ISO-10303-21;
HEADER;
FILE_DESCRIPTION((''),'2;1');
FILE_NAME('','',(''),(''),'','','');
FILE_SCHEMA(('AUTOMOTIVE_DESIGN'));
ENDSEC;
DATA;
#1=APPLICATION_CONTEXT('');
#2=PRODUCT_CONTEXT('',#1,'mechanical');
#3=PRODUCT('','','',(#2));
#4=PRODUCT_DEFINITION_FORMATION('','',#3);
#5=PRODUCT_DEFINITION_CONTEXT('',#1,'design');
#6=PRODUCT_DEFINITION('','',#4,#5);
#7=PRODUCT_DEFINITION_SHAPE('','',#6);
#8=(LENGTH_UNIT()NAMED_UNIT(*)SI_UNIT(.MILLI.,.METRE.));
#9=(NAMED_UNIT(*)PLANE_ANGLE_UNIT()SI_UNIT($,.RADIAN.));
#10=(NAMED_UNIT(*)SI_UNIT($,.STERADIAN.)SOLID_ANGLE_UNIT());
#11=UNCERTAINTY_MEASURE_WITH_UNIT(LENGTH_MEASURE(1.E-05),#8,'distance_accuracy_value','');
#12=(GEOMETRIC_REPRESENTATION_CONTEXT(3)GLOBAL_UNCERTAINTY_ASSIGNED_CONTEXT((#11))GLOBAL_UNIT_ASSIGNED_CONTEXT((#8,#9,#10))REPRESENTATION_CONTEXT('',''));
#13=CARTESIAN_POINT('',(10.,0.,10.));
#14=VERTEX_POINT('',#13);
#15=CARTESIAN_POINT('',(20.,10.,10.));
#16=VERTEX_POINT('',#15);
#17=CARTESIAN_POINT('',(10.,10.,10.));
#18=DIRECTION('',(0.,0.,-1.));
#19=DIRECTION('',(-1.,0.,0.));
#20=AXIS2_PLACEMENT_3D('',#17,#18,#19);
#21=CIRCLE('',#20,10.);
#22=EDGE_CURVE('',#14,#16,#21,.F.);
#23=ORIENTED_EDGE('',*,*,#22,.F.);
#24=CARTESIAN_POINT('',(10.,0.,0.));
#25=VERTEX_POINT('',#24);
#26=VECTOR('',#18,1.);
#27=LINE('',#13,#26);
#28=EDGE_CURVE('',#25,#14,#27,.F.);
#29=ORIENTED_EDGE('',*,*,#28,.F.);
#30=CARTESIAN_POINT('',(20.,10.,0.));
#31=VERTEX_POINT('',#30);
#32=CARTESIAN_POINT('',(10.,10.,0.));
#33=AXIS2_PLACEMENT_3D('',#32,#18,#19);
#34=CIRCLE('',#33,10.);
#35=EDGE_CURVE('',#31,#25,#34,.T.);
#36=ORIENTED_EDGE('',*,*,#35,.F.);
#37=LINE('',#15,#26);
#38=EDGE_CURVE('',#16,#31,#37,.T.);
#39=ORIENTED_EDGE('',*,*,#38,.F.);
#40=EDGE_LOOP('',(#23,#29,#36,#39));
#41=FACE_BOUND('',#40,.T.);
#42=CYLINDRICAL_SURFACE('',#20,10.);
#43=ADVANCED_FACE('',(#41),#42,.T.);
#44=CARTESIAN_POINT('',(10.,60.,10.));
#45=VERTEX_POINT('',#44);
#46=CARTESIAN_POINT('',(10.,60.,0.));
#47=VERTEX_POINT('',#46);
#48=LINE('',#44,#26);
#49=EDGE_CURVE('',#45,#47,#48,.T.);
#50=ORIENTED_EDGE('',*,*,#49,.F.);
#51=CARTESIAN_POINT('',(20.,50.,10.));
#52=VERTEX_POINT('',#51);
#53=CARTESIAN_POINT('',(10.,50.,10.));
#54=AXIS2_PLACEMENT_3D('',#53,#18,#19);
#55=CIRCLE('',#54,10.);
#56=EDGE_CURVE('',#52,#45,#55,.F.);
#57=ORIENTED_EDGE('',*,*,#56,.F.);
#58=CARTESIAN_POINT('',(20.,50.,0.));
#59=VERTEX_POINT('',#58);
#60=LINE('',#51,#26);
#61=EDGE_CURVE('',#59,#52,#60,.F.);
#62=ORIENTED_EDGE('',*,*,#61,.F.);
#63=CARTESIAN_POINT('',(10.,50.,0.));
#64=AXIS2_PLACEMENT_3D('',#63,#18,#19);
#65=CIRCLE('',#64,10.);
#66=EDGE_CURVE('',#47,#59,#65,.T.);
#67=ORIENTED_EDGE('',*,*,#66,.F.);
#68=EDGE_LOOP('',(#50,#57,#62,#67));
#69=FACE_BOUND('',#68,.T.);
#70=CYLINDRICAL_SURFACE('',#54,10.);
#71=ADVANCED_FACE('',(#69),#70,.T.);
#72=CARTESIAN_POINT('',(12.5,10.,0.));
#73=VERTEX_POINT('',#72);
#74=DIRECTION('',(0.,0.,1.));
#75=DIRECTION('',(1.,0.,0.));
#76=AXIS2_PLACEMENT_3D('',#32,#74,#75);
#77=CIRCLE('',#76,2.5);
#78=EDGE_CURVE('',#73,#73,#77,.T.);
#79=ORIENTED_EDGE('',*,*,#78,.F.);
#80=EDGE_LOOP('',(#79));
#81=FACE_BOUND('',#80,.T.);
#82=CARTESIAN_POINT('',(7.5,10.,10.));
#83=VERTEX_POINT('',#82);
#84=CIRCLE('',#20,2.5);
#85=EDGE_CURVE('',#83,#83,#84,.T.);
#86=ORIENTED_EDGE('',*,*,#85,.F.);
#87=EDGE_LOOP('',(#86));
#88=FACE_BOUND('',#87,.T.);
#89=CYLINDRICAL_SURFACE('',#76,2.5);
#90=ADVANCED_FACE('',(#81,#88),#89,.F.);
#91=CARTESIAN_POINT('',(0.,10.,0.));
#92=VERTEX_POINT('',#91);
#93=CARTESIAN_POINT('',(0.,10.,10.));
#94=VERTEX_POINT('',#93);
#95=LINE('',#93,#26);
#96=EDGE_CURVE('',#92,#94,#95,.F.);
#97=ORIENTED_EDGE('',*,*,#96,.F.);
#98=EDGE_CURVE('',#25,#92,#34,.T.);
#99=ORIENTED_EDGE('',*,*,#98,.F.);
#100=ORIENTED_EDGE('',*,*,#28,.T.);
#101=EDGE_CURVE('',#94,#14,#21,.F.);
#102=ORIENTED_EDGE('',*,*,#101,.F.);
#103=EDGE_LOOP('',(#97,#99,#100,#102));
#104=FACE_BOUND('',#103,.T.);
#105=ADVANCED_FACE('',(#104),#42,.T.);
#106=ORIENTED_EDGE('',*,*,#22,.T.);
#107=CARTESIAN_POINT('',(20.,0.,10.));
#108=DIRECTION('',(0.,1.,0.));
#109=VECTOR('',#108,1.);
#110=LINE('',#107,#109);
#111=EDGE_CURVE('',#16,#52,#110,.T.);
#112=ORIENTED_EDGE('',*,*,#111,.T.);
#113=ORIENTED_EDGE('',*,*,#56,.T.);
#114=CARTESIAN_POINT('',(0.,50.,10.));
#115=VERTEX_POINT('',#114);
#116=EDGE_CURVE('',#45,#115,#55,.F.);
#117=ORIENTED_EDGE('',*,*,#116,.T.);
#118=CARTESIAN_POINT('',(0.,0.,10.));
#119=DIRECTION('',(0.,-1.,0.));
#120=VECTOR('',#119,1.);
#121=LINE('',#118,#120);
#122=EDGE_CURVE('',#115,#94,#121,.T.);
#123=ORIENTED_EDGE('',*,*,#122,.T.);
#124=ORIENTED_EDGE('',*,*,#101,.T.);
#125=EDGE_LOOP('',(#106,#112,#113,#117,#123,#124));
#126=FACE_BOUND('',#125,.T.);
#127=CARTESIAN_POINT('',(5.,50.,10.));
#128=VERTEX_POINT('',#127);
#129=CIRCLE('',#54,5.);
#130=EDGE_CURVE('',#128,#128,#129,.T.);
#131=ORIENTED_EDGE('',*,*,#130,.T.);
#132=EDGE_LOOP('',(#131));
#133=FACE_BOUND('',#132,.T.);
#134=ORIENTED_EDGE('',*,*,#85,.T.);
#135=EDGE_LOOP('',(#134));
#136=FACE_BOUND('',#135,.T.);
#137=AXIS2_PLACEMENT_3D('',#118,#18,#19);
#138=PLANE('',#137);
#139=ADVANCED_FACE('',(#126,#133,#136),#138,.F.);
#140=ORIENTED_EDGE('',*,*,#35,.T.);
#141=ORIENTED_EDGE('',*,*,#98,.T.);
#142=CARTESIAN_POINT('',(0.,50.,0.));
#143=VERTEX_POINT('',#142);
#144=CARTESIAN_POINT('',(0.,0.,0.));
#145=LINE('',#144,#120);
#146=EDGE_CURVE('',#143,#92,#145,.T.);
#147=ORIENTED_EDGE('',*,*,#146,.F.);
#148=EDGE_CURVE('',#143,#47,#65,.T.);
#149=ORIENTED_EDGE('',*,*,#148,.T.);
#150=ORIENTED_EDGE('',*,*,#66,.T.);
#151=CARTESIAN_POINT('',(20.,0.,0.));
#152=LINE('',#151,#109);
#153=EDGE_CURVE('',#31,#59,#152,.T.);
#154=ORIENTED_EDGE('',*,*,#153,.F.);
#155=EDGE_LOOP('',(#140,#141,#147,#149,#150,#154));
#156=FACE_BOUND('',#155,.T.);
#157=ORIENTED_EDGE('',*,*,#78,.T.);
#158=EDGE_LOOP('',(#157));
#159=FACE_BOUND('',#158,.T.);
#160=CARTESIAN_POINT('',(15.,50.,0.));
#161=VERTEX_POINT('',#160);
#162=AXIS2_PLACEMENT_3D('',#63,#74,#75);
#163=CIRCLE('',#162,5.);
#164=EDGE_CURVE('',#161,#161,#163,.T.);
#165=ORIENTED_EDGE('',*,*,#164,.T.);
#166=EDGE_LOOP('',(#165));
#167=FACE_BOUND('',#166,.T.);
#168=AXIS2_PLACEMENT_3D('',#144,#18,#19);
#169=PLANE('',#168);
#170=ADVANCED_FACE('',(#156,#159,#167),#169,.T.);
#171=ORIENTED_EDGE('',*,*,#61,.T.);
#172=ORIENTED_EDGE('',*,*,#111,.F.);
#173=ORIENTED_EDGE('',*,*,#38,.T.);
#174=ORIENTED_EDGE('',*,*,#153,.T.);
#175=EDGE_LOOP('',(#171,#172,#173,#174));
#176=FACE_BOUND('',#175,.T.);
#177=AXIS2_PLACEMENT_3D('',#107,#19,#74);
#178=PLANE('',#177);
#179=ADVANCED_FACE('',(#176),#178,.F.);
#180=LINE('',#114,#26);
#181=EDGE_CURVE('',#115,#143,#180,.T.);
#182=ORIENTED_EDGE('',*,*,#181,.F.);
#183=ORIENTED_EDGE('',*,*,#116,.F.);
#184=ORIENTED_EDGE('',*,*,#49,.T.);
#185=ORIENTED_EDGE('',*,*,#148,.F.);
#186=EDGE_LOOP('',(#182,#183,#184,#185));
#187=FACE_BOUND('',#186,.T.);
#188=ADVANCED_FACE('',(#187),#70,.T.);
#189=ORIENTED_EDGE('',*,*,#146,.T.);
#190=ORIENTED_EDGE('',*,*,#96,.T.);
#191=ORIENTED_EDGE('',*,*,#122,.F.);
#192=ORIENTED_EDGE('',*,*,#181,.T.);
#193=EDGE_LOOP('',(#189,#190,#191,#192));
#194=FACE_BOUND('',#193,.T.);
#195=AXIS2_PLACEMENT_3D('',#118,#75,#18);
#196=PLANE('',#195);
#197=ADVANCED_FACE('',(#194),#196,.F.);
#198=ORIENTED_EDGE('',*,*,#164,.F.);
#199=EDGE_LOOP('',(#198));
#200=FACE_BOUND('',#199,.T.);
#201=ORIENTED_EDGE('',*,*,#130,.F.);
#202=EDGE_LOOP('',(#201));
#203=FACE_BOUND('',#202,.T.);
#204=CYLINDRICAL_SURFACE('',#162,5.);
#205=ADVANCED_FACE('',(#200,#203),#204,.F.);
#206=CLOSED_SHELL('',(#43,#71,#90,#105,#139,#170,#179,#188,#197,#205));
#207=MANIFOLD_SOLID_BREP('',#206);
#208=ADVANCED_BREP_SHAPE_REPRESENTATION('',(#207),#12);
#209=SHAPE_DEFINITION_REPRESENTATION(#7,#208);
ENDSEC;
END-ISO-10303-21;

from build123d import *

# Parameters (mm, degrees)
ESQUISSE1_W                  = 20
ESQUISSE1_H                  = 60
BOSS_EXTRU_1_DEPTH           = 10
ENL_V_MAT_EXTRU_1_DEPTH      = 65.031242374
ENL_V_MAT_EXTRU_1_DEPTH_BACK = 65.031242374
ESQUISSE2_R                  = 5
ESQUISSE2_R_2                = 2.5
CONG_1_R                     = 10


with BuildPart() as part:
    # Esquisse1 → Boss.-Extru.1 (new body)
    with BuildSketch(Plane.XY):
        with Locations((10, 30)):
            Rectangle(ESQUISSE1_W, ESQUISSE1_H)
    extrude(amount=BOSS_EXTRU_1_DEPTH)

    # Esquisse2 → Enlèv. mat.-Extru.1 (cut, two sides: drawn at the far end of the back side and taken through both)
    with BuildSketch(Plane.XY.offset(10).offset(-ENL_V_MAT_EXTRU_1_DEPTH_BACK)):
        with Locations((10, 50)):
            Circle(ESQUISSE2_R)
        with Locations((10, 10)):
            Circle(ESQUISSE2_R_2)
    extrude(amount=ENL_V_MAT_EXTRU_1_DEPTH + ENL_V_MAT_EXTRU_1_DEPTH_BACK, mode=Mode.SUBTRACT)

    # Congé1
    cong_1_edges = [part.edges().sort_by_distance(p)[0] for p in [
        (0, 0, 5),
        (20, 0, 5),
        (0, 60, 5),
        (20, 60, 5),
    ]]
    fillet(cong_1_edges, radius=CONG_1_R - 0.0001)  # a hair under: the kernel refuses the full size


solid = part.part
